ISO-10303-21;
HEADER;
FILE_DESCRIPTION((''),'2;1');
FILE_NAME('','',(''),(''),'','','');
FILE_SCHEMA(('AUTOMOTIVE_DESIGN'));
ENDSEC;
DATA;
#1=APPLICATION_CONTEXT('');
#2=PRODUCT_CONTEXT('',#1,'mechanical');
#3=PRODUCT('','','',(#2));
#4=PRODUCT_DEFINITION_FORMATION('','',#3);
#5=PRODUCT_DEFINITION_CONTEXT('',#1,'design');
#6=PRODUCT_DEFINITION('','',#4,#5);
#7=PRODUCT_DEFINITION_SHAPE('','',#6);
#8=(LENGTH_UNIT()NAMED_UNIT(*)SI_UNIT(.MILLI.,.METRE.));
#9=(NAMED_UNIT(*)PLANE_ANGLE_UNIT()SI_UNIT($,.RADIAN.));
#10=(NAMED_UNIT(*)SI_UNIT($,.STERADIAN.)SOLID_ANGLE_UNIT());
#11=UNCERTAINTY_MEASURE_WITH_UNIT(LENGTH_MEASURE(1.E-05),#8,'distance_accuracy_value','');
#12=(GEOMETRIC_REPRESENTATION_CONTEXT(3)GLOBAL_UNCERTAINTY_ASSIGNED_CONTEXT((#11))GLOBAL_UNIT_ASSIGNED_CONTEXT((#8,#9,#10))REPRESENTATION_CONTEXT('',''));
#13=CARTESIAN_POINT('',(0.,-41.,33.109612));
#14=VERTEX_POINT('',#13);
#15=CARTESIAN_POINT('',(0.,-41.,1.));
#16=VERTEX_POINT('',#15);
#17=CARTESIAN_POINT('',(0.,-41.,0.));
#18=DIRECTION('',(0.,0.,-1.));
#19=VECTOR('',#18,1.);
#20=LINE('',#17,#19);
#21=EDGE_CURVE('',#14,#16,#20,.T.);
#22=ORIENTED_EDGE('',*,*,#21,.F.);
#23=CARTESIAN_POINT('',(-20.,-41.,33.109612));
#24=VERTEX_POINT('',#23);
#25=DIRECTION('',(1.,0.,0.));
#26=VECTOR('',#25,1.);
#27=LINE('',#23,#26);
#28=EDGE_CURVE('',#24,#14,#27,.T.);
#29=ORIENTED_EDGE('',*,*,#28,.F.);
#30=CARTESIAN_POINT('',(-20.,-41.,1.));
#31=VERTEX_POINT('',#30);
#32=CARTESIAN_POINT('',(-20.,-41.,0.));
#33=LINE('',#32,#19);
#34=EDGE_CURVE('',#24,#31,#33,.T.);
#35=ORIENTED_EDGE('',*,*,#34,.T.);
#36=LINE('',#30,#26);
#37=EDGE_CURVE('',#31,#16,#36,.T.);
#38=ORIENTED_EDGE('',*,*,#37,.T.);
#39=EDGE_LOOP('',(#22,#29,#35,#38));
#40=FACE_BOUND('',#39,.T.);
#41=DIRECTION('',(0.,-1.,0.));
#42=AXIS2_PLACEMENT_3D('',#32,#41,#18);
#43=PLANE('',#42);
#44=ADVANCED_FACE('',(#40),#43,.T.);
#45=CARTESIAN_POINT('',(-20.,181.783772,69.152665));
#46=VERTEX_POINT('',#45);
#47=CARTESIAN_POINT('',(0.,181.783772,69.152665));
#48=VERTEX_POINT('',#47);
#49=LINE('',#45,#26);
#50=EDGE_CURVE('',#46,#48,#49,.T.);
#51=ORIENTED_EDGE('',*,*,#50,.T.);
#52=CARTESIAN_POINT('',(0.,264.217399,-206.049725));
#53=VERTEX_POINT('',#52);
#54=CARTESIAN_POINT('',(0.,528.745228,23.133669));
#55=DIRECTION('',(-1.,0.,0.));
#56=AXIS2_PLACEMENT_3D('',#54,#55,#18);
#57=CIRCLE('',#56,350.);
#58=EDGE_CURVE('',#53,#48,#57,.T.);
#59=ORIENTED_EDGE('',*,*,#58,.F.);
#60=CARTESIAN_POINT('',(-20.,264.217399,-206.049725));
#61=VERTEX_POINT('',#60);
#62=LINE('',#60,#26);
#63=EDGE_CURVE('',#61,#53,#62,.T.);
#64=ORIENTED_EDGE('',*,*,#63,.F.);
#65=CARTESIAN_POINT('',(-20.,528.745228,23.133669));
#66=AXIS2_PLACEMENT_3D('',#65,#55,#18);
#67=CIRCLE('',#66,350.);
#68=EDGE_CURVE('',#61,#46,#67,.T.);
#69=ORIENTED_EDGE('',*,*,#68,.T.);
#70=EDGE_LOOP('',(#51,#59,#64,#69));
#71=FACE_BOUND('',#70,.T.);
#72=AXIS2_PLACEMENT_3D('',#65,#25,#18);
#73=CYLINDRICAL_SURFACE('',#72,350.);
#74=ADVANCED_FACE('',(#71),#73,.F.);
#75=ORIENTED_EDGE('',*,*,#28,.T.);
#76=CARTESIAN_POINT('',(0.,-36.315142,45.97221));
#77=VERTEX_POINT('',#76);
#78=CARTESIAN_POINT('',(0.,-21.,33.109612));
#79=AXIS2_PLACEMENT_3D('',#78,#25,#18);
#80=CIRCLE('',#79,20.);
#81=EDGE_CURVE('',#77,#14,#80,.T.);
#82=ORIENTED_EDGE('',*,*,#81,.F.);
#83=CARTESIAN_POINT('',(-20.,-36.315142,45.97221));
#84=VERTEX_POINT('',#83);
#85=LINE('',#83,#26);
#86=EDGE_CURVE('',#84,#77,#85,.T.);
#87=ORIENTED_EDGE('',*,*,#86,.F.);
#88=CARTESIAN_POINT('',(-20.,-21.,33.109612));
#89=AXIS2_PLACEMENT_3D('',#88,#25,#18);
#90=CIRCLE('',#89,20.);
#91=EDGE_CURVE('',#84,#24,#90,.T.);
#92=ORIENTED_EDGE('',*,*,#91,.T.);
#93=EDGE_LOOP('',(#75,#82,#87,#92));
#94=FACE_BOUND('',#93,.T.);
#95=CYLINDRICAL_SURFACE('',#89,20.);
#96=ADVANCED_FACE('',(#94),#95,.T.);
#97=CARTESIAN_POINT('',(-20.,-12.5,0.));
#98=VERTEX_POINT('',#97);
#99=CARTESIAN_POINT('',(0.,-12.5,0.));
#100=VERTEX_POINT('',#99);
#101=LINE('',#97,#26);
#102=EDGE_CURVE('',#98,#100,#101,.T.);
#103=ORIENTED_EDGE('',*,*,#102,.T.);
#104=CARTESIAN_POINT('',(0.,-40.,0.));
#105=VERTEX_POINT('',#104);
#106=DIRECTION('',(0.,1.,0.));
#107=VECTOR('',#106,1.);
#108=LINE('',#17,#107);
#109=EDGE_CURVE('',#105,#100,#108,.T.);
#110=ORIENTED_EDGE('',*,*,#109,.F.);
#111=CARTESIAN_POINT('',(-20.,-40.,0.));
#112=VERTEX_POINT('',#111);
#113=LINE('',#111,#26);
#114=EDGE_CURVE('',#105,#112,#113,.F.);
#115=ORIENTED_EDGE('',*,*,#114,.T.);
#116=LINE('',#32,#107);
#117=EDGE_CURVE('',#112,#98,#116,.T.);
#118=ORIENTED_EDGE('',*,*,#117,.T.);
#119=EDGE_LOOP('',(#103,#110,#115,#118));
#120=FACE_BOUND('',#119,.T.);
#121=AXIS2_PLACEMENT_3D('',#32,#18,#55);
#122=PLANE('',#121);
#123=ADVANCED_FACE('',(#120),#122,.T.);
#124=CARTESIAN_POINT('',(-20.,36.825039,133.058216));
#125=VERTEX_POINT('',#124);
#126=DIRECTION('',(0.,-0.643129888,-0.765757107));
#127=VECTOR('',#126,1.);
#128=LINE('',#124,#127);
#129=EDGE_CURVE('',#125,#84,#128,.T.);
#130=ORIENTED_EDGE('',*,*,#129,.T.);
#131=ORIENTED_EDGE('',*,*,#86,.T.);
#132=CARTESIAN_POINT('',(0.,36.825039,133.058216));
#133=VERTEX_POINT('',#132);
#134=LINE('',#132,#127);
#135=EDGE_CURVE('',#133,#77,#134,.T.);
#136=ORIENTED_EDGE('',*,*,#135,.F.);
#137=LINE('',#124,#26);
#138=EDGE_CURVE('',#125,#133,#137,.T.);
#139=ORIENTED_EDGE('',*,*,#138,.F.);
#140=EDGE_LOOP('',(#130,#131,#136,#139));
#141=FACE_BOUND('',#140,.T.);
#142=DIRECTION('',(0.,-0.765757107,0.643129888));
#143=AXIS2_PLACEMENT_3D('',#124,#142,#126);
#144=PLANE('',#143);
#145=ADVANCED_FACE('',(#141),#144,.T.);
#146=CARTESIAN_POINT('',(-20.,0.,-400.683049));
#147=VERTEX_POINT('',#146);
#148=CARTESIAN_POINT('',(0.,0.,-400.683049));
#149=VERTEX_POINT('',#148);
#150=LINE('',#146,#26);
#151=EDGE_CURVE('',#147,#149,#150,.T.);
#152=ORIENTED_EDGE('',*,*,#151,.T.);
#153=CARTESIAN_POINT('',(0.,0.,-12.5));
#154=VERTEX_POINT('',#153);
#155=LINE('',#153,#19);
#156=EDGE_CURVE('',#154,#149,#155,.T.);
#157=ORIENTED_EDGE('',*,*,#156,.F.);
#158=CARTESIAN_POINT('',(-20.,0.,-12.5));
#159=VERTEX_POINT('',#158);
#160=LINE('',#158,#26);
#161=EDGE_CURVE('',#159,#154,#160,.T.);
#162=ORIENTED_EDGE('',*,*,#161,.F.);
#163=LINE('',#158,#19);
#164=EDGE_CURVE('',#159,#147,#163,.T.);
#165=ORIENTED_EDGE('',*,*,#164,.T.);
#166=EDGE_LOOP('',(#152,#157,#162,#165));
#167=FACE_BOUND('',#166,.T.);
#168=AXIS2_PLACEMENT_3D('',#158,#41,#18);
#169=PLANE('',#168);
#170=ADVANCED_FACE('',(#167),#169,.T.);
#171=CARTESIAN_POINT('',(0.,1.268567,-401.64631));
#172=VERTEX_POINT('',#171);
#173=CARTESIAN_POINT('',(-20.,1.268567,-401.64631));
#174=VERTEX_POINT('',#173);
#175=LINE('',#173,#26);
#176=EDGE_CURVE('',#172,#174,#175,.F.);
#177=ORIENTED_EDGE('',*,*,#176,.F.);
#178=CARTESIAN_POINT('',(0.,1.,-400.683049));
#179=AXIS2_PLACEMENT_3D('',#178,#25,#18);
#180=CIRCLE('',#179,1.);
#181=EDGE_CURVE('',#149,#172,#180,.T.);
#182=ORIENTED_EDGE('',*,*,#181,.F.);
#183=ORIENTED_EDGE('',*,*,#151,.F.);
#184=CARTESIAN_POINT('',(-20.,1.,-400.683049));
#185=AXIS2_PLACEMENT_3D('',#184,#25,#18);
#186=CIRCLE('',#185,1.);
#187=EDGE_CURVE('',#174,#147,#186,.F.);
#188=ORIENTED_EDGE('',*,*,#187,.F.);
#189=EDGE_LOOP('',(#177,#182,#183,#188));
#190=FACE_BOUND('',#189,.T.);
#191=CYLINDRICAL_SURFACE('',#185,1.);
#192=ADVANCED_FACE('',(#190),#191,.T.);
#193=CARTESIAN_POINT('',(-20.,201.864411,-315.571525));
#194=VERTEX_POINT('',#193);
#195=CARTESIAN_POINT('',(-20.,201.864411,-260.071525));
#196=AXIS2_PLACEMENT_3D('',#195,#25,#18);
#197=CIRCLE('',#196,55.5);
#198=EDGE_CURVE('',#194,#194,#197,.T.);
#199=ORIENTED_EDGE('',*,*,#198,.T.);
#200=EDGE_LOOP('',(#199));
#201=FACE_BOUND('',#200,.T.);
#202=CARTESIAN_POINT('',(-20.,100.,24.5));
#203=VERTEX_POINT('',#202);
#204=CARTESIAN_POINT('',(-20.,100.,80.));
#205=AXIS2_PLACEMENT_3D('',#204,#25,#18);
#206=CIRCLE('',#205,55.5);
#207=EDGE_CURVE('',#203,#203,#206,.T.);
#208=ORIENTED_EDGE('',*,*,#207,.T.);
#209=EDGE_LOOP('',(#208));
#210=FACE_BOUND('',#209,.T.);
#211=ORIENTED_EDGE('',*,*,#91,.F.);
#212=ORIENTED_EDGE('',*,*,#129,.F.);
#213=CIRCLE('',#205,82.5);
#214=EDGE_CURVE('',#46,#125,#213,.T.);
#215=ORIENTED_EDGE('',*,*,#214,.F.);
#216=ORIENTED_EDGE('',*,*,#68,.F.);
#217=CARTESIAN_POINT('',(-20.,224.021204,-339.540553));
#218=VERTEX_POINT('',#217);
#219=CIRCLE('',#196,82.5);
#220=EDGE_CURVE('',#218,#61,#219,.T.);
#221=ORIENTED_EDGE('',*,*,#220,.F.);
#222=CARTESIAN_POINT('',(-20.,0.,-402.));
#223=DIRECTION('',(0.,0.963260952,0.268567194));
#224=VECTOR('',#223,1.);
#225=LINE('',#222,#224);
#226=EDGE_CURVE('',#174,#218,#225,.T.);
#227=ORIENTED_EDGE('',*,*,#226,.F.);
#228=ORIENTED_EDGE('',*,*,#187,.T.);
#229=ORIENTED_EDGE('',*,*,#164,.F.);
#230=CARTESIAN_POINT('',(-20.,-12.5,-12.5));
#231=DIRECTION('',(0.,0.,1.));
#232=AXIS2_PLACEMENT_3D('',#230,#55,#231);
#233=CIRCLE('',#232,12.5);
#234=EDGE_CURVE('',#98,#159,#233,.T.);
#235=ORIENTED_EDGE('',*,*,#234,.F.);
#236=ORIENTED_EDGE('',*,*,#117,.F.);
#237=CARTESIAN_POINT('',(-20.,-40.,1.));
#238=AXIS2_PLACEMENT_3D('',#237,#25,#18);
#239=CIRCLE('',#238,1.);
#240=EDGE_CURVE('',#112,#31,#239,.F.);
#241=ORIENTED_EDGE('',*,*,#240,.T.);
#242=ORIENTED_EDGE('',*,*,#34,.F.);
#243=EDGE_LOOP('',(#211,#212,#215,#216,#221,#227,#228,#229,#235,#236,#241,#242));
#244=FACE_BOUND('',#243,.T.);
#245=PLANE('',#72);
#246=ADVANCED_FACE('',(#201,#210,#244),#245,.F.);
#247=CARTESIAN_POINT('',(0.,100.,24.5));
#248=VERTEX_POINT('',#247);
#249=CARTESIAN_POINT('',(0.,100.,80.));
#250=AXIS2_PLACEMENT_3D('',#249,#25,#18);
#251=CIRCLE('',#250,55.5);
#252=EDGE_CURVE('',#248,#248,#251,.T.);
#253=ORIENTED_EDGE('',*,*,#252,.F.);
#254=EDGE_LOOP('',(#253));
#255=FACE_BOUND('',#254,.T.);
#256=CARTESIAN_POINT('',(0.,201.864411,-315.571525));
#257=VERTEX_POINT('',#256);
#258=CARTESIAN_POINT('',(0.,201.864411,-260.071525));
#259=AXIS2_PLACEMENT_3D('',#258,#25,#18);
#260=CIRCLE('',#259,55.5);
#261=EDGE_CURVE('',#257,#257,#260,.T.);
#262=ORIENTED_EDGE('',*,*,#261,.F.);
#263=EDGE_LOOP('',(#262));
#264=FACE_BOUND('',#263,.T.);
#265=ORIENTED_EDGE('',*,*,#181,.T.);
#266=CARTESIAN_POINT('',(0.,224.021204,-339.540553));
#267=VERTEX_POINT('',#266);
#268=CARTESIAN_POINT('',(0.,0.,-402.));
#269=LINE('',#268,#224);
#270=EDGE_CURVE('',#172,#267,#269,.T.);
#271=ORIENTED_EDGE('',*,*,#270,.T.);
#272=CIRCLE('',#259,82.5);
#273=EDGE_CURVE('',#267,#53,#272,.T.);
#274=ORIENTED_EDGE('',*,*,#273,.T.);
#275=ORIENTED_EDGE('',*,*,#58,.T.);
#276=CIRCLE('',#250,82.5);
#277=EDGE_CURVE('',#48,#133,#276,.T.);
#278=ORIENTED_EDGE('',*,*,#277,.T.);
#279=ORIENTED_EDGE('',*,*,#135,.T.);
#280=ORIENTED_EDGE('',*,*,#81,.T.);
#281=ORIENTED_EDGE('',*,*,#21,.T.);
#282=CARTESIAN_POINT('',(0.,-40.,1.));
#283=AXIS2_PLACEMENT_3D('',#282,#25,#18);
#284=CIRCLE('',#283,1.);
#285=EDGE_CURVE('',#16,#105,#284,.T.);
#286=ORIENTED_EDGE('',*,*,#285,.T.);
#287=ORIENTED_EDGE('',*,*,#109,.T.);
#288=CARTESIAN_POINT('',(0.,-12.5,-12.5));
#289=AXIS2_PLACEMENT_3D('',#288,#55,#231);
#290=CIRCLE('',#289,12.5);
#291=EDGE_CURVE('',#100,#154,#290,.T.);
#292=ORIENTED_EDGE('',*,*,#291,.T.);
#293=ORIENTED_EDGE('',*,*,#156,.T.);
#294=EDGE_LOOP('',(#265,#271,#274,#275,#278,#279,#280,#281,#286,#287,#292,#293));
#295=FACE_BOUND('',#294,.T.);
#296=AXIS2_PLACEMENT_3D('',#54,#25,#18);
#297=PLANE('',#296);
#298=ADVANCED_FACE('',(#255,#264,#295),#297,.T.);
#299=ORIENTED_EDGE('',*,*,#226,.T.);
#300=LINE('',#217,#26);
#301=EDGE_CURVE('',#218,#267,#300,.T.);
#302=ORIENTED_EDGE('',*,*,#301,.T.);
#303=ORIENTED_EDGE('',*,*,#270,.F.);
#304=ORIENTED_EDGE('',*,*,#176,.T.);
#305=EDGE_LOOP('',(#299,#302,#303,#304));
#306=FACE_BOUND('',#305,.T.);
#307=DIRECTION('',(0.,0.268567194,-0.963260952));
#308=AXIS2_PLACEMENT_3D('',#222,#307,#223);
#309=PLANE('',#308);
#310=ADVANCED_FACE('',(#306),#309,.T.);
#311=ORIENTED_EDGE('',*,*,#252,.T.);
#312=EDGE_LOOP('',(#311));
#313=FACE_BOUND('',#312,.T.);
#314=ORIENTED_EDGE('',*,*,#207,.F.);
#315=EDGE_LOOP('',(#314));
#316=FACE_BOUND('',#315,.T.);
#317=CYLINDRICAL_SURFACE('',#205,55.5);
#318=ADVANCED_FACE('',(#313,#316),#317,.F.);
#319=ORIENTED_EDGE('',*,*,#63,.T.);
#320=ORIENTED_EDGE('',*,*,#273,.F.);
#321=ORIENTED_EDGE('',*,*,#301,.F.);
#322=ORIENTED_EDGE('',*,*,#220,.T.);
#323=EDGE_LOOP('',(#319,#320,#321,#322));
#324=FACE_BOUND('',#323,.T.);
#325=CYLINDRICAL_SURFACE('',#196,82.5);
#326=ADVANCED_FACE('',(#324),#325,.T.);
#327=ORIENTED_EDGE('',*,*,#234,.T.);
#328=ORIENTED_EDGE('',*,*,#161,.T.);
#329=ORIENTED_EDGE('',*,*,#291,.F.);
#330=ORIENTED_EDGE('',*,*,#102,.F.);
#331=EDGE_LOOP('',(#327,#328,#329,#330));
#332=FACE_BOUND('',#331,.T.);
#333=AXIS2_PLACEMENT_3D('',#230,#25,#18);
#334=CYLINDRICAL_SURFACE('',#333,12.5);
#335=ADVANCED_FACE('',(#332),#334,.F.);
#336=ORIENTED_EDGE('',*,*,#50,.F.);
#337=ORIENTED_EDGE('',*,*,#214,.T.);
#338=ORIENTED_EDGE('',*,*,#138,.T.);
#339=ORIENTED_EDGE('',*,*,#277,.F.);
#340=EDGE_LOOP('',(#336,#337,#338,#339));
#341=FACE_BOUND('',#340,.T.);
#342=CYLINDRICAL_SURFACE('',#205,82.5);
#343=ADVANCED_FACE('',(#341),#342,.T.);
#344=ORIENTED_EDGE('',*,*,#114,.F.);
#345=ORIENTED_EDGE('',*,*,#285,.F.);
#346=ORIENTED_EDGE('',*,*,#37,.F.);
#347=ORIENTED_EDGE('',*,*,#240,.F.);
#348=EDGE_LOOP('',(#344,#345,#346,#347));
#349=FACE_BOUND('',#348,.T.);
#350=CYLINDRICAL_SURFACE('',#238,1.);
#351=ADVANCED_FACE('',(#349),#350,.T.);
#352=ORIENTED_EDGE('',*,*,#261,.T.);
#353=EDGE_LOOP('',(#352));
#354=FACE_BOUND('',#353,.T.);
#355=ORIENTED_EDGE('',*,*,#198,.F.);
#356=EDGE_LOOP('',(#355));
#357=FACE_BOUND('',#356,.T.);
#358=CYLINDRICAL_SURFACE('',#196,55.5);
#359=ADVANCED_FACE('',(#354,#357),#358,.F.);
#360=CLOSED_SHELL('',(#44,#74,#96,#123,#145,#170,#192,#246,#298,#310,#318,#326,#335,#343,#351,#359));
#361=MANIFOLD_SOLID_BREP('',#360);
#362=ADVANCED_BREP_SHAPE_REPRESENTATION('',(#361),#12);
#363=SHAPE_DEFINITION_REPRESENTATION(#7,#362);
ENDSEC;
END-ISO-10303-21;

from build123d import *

# Parameters (mm, degrees)
SKETCH1_R          = 55.5
BASE_FLANGE1_DEPTH = 20
FILLET_1_0_R       = 1


# Sheet-metal steps are written as plain solids
with BuildPart() as part:
    # Sketch1 → Base-Flange1 (new body)
    with BuildSketch(Plane(origin=(0, 0, 0), x_dir=(0, 0, -1), z_dir=(1, 0, 0))):
        with BuildLine():
            Line((0, -41), (0, -12.5))
            ThreePointArc((0, -12.5), (3.661165235, -3.661165235), (12.5, 0))
            Line((12.5, 0), (402, 0))
            Line((402, 0), (339.540553103, 224.02120437))
            ThreePointArc((339.540553103, 224.02120437), (283.858577294, 280.860778622), (206.049724664, 264.217399056))
            ThreePointArc((206.049724664, 264.217399056), (77.296032092, 193.463443053), (-69.152665136, 181.783771779))
            ThreePointArc((-69.152665136, 181.783771779), (-155.489722436, 133.27990094), (-133.058215758, 36.825038658))
            Line((-133.058215758, 36.825038658), (-45.972209781, -36.315142143))
            ThreePointArc((-45.972209781, -36.315142143), (-39.95421417, -39.792323471), (-33.109612021, -41))
            Line((-33.109612021, -41), (0, -41))
        make_face()
        with Locations((-80, 100)):
            Circle(SKETCH1_R, mode=Mode.SUBTRACT)
        with Locations((260.071524539, 201.864410849)):
            Circle(SKETCH1_R, mode=Mode.SUBTRACT)
    extrude(amount=-BASE_FLANGE1_DEPTH)

    # Fillet-1.0
    fillet_1_0_edges = [part.edges().sort_by_distance(p)[0] for p in [
        (-10, 0, -402),
        (-10, -41, 0),
    ]]
    fillet(fillet_1_0_edges, radius=FILLET_1_0_R)


solid = part.part
